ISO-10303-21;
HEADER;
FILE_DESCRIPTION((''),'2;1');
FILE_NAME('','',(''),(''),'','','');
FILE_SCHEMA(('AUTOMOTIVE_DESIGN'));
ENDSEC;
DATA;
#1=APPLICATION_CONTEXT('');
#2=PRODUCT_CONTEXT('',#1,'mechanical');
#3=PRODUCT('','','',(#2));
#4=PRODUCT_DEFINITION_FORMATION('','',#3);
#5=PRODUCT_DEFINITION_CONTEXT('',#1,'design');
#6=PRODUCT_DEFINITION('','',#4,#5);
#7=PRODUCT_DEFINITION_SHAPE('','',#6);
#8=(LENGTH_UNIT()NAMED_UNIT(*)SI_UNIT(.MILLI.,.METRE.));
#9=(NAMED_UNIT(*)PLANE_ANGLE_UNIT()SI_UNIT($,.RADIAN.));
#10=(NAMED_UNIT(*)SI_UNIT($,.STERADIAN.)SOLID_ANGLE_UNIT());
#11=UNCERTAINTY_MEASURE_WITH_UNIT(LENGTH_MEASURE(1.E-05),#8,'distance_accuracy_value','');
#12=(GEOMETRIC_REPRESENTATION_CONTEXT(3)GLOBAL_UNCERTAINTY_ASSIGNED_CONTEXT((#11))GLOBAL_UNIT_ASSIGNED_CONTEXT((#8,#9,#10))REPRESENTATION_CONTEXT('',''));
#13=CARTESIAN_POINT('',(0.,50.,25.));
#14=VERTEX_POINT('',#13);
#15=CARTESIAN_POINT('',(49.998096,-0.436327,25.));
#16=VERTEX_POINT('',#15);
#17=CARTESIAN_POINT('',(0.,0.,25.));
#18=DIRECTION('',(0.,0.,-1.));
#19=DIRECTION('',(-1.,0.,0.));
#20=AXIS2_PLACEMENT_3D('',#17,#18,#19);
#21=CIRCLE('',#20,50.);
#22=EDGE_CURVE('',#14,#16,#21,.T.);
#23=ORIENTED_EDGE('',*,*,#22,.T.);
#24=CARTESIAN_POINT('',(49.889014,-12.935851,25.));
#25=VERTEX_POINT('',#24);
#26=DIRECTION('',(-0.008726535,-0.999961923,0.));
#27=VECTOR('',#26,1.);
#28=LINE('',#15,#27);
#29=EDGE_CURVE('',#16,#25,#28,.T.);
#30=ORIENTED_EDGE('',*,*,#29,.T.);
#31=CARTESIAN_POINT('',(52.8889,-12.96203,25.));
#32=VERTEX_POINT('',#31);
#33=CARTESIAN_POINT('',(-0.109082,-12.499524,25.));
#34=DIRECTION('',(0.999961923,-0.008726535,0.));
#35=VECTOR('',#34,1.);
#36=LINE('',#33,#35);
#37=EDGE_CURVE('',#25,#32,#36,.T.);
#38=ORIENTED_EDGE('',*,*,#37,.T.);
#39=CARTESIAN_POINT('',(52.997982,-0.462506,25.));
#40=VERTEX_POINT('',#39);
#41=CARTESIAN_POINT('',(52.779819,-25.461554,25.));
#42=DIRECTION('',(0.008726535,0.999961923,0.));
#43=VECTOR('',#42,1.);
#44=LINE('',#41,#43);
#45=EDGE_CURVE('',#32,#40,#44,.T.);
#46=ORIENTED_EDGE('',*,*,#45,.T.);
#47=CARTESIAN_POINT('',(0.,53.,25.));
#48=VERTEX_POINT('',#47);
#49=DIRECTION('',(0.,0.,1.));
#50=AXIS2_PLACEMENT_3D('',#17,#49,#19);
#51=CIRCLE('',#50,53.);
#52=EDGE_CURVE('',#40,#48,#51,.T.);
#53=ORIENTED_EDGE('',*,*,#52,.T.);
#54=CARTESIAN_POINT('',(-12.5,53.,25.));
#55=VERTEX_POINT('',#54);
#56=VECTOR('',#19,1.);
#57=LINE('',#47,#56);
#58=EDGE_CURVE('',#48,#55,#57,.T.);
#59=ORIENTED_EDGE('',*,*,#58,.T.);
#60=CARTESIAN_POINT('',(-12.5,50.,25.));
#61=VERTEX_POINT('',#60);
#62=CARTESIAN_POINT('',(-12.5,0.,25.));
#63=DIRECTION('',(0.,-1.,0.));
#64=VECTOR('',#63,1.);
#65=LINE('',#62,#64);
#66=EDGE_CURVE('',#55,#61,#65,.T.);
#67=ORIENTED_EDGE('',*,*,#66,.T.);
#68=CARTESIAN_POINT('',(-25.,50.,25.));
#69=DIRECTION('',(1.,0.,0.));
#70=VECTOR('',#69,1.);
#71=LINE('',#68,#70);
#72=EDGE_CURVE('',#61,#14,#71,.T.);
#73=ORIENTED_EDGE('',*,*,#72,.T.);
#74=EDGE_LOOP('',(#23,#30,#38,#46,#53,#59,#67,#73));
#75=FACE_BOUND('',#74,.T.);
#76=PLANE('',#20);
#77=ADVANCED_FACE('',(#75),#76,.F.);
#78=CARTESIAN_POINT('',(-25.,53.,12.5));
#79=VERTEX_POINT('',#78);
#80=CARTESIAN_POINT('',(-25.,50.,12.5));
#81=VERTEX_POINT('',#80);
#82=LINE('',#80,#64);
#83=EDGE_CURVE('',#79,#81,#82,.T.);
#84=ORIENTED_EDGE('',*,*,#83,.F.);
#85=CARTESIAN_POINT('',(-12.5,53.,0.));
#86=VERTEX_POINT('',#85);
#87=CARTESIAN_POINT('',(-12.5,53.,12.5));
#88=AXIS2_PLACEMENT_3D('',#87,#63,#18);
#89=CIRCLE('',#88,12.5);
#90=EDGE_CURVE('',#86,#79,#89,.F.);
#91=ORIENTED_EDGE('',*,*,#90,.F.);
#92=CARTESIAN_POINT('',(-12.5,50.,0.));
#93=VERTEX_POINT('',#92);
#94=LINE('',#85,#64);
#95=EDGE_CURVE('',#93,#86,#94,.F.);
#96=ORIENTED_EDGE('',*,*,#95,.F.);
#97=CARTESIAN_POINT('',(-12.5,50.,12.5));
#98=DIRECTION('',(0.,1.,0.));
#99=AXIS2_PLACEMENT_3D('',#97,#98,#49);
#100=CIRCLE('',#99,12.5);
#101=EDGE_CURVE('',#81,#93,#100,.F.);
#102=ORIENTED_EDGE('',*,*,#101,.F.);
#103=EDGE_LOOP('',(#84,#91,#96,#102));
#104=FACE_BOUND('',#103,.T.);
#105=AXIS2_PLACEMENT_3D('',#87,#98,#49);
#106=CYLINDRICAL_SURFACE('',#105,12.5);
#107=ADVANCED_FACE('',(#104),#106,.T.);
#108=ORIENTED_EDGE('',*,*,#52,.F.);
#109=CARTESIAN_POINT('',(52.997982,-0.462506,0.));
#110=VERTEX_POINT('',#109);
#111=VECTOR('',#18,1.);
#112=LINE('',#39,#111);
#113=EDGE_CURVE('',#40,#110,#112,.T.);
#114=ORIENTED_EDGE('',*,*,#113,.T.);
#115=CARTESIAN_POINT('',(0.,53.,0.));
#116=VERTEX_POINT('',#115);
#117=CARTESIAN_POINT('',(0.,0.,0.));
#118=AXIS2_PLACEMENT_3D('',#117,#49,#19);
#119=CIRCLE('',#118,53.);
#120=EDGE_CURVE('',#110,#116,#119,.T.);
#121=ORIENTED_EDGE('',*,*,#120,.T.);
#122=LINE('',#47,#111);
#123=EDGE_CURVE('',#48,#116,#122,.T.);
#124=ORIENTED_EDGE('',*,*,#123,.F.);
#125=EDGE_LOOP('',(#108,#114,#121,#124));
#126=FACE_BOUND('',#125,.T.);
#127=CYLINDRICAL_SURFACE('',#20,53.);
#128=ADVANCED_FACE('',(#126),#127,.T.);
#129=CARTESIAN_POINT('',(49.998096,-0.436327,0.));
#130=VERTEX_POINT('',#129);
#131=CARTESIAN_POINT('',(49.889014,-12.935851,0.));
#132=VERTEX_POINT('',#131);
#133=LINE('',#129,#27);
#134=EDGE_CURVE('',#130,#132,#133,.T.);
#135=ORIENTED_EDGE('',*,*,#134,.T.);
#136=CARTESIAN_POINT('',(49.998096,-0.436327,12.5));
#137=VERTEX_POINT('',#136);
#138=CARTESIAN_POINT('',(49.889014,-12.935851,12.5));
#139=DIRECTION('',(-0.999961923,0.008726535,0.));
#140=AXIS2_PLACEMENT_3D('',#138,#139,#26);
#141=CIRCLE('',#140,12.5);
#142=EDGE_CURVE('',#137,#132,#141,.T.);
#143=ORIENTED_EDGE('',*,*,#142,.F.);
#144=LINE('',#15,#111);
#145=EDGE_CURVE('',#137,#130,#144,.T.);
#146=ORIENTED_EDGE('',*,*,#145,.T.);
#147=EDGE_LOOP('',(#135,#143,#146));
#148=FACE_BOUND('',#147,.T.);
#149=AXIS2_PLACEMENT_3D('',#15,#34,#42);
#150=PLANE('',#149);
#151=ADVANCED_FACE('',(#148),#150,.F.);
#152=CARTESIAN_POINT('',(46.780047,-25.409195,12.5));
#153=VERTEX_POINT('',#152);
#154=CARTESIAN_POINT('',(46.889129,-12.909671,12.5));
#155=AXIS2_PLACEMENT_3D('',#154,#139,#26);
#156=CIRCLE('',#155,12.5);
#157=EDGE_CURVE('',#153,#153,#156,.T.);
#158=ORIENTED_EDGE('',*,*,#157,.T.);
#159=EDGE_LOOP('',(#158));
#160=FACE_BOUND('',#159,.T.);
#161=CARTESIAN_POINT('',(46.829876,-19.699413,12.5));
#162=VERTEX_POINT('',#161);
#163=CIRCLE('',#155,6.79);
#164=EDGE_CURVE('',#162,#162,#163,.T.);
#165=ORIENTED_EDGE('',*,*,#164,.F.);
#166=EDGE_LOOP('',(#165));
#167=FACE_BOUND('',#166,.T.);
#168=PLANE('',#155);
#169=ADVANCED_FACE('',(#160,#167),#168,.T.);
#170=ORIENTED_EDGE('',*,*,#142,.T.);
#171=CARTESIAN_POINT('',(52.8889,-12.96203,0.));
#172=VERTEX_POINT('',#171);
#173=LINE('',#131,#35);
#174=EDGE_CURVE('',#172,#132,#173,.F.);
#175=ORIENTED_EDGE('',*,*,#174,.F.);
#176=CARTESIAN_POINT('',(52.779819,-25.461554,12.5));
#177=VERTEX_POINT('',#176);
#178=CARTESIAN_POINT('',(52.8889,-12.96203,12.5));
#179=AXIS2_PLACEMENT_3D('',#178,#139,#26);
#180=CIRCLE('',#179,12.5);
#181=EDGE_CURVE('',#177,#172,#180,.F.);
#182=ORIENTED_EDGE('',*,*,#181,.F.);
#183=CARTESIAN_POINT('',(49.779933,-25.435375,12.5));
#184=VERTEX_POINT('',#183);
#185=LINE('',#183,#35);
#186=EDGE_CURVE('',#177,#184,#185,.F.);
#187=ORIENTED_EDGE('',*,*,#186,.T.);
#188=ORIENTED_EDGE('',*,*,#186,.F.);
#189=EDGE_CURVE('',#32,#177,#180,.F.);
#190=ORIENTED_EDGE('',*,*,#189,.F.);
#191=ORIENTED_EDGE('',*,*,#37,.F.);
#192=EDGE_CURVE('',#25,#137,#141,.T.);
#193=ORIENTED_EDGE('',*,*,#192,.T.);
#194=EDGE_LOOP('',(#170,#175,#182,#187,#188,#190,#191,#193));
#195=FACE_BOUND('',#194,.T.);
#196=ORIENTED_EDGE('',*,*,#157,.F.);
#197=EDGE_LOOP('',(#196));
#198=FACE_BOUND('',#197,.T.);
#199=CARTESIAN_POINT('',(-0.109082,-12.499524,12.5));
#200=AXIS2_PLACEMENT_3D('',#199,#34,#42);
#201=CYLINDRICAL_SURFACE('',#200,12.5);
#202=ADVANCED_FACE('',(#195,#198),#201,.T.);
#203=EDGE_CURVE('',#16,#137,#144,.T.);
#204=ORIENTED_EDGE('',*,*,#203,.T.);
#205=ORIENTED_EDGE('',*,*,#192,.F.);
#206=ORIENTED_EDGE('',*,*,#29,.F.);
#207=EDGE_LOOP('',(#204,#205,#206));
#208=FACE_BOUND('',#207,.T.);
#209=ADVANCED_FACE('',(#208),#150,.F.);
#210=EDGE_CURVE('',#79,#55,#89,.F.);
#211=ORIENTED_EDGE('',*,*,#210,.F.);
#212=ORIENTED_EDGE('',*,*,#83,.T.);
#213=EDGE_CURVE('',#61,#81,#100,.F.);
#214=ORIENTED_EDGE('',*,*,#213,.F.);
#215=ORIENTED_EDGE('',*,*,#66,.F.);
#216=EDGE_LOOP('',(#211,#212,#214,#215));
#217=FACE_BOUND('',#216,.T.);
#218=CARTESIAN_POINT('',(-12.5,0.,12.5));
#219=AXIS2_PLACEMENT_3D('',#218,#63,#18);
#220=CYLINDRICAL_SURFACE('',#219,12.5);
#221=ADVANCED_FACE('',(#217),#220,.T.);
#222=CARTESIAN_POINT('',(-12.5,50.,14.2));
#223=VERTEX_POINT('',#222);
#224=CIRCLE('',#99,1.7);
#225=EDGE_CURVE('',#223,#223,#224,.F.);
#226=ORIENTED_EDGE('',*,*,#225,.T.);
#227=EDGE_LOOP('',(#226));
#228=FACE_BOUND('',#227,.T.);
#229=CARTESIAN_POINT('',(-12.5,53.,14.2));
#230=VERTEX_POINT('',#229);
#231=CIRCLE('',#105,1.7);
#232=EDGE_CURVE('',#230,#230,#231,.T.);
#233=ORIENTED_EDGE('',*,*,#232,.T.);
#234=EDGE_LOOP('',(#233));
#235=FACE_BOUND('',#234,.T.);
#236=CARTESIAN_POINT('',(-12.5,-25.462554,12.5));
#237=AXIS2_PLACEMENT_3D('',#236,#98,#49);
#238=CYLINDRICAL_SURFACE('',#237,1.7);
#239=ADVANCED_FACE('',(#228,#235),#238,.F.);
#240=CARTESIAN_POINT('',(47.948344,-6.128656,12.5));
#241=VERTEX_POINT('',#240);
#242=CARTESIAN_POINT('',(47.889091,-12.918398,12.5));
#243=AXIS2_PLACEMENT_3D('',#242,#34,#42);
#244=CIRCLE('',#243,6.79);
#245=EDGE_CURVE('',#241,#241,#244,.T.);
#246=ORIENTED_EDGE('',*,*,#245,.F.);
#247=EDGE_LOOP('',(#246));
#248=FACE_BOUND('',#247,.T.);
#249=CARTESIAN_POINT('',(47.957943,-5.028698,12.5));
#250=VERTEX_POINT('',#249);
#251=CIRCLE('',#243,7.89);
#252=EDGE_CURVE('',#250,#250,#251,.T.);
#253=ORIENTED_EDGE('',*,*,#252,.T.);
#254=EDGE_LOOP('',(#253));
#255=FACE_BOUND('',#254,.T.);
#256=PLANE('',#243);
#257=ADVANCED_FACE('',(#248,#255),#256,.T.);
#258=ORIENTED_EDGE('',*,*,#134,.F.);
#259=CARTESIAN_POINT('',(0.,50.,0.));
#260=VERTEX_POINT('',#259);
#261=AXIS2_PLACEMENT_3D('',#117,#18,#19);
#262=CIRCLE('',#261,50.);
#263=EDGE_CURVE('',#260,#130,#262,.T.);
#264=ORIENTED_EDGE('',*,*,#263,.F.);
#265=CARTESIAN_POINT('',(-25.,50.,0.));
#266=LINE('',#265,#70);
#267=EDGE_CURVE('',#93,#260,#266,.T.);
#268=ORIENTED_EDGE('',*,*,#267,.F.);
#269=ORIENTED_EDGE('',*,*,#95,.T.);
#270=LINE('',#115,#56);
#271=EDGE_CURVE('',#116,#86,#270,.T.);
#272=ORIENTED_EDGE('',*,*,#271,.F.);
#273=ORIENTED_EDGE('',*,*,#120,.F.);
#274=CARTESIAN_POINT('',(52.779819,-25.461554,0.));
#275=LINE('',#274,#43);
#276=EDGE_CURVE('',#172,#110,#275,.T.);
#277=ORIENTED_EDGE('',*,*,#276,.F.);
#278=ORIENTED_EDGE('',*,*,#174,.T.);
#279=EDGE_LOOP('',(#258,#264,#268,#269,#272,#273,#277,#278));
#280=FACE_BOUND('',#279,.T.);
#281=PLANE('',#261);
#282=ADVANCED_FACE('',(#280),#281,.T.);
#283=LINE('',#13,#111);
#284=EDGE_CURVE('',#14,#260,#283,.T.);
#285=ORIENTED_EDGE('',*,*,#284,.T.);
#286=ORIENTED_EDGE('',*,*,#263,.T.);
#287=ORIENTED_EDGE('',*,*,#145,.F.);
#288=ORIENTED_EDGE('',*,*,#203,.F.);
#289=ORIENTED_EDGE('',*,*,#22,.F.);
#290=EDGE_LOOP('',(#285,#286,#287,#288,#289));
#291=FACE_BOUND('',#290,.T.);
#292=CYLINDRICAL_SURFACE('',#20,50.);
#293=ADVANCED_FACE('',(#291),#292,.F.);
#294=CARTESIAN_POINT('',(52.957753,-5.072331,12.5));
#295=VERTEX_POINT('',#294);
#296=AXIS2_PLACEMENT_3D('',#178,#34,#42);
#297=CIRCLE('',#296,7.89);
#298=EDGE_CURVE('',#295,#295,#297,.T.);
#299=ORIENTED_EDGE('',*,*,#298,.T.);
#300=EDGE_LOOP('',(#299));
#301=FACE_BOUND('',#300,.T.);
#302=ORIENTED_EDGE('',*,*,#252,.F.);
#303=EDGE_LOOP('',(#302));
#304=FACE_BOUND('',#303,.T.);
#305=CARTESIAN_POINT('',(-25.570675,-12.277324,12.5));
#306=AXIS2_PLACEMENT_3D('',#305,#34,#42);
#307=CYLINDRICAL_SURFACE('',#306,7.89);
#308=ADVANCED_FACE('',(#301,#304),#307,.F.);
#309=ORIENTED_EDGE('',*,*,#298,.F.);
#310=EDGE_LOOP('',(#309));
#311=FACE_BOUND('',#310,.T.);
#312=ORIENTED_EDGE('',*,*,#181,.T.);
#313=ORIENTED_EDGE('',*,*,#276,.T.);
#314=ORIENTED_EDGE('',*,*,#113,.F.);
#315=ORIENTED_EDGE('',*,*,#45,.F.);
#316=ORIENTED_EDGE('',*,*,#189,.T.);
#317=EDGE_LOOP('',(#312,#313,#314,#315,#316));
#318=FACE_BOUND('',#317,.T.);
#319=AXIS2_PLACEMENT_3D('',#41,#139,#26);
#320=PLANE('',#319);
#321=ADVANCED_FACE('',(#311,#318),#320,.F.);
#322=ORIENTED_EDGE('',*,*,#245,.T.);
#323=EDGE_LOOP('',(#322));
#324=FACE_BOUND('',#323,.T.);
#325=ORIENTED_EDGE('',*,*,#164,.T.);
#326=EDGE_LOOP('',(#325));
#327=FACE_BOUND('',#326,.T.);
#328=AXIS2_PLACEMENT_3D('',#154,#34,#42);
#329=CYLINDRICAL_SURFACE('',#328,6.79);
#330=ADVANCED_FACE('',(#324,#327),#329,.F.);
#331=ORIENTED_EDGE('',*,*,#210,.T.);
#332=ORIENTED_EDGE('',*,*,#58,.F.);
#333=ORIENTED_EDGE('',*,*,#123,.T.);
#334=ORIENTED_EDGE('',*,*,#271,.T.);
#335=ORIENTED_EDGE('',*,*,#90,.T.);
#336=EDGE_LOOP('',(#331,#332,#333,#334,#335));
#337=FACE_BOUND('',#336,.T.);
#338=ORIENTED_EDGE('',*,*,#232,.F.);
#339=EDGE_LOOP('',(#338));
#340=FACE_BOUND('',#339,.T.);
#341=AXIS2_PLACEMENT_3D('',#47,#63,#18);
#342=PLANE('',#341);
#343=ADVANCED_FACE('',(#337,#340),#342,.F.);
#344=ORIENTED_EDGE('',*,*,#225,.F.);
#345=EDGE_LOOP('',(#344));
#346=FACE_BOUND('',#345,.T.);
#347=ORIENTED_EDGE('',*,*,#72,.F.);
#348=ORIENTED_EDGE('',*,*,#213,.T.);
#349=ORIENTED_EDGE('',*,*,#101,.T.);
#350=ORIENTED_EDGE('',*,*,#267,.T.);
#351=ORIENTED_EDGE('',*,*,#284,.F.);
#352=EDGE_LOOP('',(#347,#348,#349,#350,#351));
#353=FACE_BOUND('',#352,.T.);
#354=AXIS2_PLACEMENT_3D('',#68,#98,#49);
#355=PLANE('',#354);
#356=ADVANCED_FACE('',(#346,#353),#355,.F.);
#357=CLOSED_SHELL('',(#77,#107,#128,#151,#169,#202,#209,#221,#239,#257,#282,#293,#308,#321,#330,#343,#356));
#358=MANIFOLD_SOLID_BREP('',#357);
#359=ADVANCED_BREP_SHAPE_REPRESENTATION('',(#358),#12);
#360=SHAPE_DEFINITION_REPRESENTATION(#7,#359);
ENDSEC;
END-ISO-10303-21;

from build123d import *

# Parameters (mm, degrees)
BOSS_EXTRUDE1_DEPTH = 25
CUT_EXTRUDE1_REACH  = 99.811
SKETCH6_R           = 7.89
FILLET1_R           = 12.5
FILLET2_R           = 12.5
SKETCH7_R           = 12.5
SKETCH7_R_2         = 6.79
BOSS_EXTRUDE2_DEPTH = 3
SKETCH8_R           = 7.89
CUT_EXTRUDE2_DEPTH  = 5
CUT_EXTRUDE3_REACH  = 99.93
SKETCH9_R           = 1.7


with BuildPart() as part:
    # Sketch2 → Boss-Extrude1 (new body)
    with BuildSketch(Plane.XY):
        with BuildLine():
            Line((0, 53), (-25, 53))
            Line((-25, 53), (-25, 50))
            Line((-25, 50), (0, 50))
            ThreePointArc((0, 50), (35.509268781, 35.200736223), (49.998096153, -0.436326775))
            Line((49.998096153, -0.436326775), (49.779932766, -25.435374852))
            Line((49.779932766, -25.435374852), (52.779818535, -25.461554458))
            Line((52.779818535, -25.461554458), (52.997981922, -0.462506381))
            ThreePointArc((52.997981922, -0.462506381), (37.639824908, 37.312780396), (0, 53))
        make_face()
    extrude(amount=BOSS_EXTRUDE1_DEPTH)

    # Sketch6 → Cut-Extrude1 (cut, up to next)
    with BuildSketch(Plane(origin=(52.997981922, -0.462506381, 0), x_dir=(0, 0, -1), z_dir=(0.9999619230641714, -0.00872653549837746, 0)), mode=Mode.PRIVATE) as cut_extrude1_sk1:
        with Locations(Location((-12.5, -12.5, 0), (0, 0, 90))):
            Circle(SKETCH6_R)
    cut_extrude1_tool1 = extrude(cut_extrude1_sk1.sketch, amount=-CUT_EXTRUDE1_REACH, mode=Mode.PRIVATE) & part.part
    add(cut_extrude1_tool1.solids().sort_by_distance((52.8889, -12.96203, 12.5))[0], mode=Mode.SUBTRACT)

    # Fillet1
    fillet1_edges = [part.edges().sort_by_distance(p)[0] for p in [
        (51.27987565, -25.448464655, 0),
        (51.27987565, -25.448464655, 25),
    ]]
    fillet(fillet1_edges, radius=FILLET1_R - 0.0001)  # a hair under: the kernel refuses the full size

    # Fillet2
    fillet2_edges = [part.edges().sort_by_distance(p)[0] for p in [
        (-25, 51.5, 25),
        (-25, 51.5, 0),
    ]]
    fillet(fillet2_edges, radius=FILLET2_R - 0.0001)  # a hair under: the kernel refuses the full size

    # Sketch7 → Boss-Extrude2 (add)
    with BuildSketch(Plane(origin=(49.998096153, -0.436326775, 0), x_dir=(0, 0, 1), z_dir=(-0.9999619230641714, 0.008726535498377049, 0))):
        with Locations(Location((12.5, -12.5, 0), (0, 0, 270))):
            Circle(SKETCH7_R)
        with Locations(Location((12.5, -12.5, 0), (0, 0, 270))):
            Circle(SKETCH7_R_2, mode=Mode.SUBTRACT)
    extrude(amount=BOSS_EXTRUDE2_DEPTH)

    # Sketch8 → Cut-Extrude2 (cut)
    with BuildSketch(Plane(origin=(52.997981922, -0.462506381, 0), x_dir=(0, 0, -1), z_dir=(0.9999619230641714, -0.00872653549837732, 0))):
        with Locations(Location((-12.5, -12.5, 0), (0, 0, 90))):
            Circle(SKETCH8_R)
    extrude(amount=-CUT_EXTRUDE2_DEPTH, mode=Mode.SUBTRACT)

    # Sketch9 → Cut-Extrude3 (cut, up to next)
    with BuildSketch(Plane(origin=(0, 53, 0), x_dir=(1, 0, 0), z_dir=(0, 1, 0)), mode=Mode.PRIVATE) as cut_extrude3_sk1:
        with Locations(Location((-12.5, -12.5, 0), (0, 0, 270))):
            Circle(SKETCH9_R)
    cut_extrude3_tool1 = extrude(cut_extrude3_sk1.sketch, amount=-CUT_EXTRUDE3_REACH, mode=Mode.PRIVATE) & part.part
    add(cut_extrude3_tool1.solids().sort_by_distance((-12.5, 53, 12.5))[0], mode=Mode.SUBTRACT)


solid = part.part
